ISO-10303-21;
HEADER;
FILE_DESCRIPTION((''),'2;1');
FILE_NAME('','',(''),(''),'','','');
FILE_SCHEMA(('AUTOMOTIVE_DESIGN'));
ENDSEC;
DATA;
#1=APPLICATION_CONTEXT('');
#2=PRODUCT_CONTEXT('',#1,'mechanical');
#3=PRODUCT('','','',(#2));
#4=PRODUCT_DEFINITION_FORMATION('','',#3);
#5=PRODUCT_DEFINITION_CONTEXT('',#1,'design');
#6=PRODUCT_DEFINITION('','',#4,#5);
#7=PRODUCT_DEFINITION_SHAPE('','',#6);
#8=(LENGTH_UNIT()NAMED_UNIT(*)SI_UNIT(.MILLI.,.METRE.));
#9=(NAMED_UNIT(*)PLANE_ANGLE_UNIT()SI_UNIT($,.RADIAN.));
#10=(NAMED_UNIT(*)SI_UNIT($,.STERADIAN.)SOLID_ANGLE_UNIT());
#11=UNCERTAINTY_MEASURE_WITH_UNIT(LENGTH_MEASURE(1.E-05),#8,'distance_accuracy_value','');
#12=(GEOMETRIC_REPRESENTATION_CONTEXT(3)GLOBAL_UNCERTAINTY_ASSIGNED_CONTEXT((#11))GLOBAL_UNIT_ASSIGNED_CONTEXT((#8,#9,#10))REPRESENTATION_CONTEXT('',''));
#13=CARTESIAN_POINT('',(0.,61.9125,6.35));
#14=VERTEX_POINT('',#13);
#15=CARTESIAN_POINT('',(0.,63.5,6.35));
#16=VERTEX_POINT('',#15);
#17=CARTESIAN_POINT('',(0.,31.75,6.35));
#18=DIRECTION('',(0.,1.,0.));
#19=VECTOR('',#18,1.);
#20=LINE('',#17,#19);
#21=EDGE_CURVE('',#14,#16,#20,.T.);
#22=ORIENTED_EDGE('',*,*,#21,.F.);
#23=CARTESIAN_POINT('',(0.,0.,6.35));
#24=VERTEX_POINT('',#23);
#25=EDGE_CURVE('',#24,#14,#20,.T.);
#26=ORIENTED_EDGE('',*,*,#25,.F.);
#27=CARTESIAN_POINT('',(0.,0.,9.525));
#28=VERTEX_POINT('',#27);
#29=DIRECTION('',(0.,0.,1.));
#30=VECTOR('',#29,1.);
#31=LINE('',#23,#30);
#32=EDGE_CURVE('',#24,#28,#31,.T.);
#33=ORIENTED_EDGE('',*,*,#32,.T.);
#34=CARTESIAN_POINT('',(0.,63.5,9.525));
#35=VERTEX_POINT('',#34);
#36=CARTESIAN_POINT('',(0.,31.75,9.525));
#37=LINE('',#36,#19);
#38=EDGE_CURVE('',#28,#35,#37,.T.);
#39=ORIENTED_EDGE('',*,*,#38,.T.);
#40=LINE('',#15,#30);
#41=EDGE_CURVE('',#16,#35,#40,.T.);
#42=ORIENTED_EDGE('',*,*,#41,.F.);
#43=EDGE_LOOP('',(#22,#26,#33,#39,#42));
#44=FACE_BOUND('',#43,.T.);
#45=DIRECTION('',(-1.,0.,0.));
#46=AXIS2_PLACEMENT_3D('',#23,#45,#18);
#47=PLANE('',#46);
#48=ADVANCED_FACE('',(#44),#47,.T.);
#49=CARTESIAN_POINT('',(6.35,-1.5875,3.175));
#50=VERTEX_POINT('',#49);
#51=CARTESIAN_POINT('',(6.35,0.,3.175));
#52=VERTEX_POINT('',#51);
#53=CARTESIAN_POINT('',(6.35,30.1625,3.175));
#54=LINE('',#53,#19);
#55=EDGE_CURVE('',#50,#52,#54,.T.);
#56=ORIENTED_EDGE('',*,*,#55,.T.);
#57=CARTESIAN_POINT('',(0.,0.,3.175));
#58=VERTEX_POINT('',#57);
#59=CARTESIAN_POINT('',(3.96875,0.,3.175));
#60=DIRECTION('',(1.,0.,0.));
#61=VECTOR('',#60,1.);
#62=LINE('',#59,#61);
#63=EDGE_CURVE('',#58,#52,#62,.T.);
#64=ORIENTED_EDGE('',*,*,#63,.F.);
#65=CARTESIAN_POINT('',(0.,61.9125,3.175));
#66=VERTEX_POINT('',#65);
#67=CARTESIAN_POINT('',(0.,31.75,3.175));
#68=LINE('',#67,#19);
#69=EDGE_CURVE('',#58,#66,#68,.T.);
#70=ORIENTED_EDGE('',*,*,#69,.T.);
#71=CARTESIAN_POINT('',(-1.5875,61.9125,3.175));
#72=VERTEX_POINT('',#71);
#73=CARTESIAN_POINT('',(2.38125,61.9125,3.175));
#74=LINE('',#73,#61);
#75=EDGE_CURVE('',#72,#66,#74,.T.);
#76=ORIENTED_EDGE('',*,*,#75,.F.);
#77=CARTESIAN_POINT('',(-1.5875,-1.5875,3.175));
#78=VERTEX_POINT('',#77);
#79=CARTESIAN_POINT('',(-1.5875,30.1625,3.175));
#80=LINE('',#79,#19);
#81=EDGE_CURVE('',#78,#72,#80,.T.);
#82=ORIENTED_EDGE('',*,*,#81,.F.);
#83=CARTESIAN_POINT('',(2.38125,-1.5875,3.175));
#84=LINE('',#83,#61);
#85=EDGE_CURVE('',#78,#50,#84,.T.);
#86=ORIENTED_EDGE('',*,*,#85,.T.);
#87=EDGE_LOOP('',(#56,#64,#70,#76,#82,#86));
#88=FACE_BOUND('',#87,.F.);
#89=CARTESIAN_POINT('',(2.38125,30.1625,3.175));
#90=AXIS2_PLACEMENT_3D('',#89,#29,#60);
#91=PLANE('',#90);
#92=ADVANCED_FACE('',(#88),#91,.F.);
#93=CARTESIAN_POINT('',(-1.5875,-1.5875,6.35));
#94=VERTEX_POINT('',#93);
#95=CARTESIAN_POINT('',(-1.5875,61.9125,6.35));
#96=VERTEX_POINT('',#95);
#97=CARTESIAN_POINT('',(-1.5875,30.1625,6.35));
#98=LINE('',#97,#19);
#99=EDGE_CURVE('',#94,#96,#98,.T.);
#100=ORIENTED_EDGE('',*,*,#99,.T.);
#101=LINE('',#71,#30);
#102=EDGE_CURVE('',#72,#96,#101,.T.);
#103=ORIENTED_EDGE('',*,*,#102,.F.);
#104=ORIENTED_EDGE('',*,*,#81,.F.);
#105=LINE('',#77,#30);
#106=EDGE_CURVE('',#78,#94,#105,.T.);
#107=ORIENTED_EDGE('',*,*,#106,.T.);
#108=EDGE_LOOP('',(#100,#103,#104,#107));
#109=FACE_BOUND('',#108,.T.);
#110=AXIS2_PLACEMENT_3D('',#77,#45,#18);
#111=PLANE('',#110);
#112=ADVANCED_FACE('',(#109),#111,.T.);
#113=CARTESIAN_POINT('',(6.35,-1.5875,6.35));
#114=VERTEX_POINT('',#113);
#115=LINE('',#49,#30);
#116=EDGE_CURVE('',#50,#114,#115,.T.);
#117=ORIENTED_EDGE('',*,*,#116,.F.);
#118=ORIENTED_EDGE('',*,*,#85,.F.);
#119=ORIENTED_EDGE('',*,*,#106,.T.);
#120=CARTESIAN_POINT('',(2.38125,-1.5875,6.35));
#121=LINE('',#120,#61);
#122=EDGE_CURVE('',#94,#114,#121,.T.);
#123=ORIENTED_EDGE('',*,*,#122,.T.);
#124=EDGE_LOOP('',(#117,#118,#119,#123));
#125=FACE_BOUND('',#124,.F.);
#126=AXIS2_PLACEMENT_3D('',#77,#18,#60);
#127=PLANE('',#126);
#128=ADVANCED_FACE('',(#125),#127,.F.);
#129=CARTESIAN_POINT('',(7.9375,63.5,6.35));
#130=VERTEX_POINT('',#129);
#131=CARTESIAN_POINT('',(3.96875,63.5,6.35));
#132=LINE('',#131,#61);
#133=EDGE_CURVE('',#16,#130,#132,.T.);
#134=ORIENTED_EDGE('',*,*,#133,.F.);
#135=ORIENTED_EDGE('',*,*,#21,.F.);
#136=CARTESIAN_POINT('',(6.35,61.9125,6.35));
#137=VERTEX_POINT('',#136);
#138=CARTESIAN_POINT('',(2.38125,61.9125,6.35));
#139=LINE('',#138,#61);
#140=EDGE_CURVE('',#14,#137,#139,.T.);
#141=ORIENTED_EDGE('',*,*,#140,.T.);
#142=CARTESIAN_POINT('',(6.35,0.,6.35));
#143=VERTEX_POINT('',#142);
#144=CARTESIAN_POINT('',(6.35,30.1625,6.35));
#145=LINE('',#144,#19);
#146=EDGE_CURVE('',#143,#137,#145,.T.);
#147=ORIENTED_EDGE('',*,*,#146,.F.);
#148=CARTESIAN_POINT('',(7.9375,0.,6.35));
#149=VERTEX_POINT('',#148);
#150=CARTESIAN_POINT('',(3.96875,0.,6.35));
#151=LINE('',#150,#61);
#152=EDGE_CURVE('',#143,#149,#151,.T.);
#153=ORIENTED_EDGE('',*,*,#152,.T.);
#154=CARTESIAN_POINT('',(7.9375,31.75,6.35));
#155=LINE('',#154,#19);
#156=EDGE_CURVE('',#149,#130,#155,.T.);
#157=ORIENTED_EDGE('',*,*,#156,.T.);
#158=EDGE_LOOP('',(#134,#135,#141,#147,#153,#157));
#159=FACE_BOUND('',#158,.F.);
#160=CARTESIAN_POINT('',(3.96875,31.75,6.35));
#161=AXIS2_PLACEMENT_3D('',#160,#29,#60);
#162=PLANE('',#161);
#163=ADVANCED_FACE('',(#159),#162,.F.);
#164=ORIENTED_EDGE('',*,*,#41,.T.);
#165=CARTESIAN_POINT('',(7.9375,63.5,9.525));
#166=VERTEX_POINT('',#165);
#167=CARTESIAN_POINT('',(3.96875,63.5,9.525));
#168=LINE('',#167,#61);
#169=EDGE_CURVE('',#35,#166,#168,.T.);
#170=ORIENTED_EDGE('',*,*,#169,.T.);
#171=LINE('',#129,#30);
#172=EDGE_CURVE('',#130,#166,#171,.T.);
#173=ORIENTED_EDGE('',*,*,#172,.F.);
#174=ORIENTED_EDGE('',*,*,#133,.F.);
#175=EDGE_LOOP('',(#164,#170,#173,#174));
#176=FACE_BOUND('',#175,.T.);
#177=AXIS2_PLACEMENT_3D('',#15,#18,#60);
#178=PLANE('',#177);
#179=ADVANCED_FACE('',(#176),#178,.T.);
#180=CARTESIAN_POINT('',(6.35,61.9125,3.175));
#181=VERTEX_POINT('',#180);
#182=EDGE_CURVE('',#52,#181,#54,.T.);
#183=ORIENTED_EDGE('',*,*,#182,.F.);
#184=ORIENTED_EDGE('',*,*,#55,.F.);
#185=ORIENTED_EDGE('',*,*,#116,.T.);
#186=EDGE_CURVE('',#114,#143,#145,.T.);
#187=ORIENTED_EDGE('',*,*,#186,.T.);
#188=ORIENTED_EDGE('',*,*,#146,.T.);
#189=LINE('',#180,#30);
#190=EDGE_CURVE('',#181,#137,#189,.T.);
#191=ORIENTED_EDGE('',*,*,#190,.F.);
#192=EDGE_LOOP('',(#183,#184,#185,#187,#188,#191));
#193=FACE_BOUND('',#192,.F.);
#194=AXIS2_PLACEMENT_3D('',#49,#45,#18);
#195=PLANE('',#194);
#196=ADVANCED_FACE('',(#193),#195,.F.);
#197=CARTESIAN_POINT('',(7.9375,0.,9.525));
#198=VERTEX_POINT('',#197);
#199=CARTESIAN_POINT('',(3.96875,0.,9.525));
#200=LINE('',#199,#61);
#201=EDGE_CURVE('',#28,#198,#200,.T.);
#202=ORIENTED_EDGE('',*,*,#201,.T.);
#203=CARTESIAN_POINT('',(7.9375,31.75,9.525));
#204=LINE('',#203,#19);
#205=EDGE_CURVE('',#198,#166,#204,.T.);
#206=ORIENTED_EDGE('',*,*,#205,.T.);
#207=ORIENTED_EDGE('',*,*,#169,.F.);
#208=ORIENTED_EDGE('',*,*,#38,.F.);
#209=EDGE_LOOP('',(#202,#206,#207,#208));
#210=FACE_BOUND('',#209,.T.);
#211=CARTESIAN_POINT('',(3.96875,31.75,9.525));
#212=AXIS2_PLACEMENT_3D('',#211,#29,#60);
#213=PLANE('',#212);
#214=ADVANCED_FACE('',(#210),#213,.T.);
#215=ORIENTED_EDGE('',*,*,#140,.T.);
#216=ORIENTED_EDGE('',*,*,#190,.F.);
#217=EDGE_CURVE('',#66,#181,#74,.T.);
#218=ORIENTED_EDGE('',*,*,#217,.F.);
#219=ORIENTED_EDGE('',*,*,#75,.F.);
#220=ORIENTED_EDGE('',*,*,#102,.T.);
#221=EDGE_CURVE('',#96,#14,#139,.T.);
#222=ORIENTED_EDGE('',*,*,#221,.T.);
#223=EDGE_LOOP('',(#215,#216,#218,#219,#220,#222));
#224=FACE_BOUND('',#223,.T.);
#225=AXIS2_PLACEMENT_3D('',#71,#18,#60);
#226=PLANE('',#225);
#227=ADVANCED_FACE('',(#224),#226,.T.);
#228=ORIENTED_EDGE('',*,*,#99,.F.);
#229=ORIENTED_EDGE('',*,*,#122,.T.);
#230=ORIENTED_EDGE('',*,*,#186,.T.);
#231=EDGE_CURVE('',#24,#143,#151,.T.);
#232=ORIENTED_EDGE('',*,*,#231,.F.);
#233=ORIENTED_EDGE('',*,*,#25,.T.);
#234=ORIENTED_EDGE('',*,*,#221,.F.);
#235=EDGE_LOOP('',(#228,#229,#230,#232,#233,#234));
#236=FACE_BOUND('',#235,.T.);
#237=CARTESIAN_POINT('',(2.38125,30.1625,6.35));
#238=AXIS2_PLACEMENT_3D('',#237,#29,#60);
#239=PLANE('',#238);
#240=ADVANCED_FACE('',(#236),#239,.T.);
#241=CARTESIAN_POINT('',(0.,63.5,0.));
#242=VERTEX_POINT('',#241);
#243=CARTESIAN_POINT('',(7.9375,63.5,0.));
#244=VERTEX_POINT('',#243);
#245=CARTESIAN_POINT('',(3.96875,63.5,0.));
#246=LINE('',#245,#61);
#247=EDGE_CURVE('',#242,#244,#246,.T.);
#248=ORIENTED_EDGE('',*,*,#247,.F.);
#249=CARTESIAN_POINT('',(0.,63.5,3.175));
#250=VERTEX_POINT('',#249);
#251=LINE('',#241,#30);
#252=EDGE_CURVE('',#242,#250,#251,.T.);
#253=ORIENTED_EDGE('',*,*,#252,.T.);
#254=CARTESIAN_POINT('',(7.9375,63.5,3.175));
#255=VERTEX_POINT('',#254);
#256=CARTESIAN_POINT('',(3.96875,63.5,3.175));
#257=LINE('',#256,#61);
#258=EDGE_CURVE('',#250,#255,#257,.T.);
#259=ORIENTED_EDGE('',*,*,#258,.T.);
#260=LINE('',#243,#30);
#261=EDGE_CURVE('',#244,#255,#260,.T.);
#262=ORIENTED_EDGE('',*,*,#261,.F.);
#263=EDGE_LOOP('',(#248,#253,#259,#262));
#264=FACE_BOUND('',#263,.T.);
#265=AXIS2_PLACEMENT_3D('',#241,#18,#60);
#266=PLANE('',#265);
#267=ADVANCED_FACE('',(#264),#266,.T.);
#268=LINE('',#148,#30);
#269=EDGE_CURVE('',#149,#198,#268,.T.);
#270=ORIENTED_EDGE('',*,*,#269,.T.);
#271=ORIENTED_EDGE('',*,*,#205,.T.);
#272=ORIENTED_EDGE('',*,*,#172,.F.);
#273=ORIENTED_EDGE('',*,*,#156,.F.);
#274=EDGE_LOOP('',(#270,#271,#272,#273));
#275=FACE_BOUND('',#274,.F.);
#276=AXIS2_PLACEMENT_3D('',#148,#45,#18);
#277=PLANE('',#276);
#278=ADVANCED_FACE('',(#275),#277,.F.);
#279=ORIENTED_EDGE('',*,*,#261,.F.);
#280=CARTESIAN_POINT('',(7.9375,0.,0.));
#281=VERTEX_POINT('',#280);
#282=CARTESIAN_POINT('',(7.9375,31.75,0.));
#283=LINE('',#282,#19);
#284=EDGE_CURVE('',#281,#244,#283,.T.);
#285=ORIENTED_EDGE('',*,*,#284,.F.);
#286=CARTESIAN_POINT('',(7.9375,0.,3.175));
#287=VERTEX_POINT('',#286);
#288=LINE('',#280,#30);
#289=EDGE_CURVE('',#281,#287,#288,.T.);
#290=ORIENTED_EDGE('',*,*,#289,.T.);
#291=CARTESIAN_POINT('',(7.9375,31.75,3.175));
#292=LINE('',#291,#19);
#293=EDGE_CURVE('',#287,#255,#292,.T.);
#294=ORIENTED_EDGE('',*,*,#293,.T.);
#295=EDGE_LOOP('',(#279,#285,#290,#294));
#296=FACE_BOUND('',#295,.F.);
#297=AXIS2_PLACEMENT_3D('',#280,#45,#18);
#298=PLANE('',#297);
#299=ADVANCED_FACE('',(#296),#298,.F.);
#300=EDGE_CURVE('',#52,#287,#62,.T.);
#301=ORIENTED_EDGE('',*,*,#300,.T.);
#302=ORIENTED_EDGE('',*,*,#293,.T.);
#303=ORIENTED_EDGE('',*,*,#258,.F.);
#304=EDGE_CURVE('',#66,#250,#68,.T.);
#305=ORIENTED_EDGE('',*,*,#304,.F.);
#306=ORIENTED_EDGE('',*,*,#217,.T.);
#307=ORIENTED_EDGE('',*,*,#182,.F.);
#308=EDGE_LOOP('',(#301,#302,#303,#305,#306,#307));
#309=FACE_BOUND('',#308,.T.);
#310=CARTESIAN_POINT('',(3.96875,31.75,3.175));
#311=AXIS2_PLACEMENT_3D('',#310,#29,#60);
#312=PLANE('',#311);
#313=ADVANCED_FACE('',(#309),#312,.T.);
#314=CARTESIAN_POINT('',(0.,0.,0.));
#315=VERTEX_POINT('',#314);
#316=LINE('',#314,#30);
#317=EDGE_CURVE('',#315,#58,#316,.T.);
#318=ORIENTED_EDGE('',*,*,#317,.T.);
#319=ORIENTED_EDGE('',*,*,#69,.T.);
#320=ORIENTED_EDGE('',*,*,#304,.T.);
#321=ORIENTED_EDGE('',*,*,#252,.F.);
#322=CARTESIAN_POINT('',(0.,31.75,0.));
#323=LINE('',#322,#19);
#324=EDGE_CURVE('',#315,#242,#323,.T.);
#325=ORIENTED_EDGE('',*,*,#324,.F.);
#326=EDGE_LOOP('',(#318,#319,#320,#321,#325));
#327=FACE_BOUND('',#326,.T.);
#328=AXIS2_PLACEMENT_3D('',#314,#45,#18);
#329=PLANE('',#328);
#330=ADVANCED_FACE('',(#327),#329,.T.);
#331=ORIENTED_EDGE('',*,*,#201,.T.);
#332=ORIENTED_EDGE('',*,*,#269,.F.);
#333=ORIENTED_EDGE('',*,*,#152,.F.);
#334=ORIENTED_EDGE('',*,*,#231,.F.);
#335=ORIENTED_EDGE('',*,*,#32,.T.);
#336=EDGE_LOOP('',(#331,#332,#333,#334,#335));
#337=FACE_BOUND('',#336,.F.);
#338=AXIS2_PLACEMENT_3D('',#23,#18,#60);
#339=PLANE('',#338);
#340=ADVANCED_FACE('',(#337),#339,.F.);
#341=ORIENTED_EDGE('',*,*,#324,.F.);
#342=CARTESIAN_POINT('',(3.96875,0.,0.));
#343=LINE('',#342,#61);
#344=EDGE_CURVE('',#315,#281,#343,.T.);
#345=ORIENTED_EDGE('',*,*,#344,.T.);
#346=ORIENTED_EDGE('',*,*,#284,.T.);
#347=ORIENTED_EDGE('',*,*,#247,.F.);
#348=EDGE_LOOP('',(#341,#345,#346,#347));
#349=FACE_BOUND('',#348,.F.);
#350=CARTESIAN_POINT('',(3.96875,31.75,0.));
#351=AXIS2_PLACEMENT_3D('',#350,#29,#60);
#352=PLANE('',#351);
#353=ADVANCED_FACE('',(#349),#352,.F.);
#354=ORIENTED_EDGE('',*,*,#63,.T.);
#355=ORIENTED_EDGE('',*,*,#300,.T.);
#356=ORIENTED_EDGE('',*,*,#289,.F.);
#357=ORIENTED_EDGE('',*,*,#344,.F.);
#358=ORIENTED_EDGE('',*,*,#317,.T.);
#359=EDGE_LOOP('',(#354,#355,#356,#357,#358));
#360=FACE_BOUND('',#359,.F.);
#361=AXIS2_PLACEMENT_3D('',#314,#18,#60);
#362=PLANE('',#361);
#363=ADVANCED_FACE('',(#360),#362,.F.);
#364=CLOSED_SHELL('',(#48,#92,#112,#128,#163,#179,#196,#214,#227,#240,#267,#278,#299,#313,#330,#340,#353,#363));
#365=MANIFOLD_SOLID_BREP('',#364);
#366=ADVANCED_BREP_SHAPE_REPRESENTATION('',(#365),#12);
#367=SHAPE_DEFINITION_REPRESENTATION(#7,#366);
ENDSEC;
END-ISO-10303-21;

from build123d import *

# Parameters (mm, degrees)
F2_W     = 7.9375
F2_H     = 63.5
F3_DEPTH = 3.175
F4_W     = 7.9375
F4_H     = 63.5
F5_DEPTH = 3.175
F6_W     = 7.9375
F6_H     = 63.5
F7_DEPTH = 3.175


# Not quite as in the source:
# - a variable given as a bare number and used for a length is read in inches; the dataset says mm whatever the document's units were


with BuildPart() as f3:
    # F2 (on Top) → F3 (new body)
    with BuildSketch(Plane.XY):
        with Locations((3.96875, 31.75)):
            Rectangle(F2_W, F2_H)
    extrude(amount=F3_DEPTH)

    # F4 (on face) → F5 (join)
    with BuildSketch(Plane.XY.offset(3.175)):
        with Locations((2.38125, 30.1625)):
            Rectangle(F4_W, F4_H)
    extrude(amount=F5_DEPTH)

    # F6 (on face) → F7 (join)
    with BuildSketch(Plane.XY.offset(6.35)):
        with Locations((3.96875, 31.75)):
            Rectangle(F6_W, F6_H)
    extrude(amount=F7_DEPTH)


solid = f3.part
